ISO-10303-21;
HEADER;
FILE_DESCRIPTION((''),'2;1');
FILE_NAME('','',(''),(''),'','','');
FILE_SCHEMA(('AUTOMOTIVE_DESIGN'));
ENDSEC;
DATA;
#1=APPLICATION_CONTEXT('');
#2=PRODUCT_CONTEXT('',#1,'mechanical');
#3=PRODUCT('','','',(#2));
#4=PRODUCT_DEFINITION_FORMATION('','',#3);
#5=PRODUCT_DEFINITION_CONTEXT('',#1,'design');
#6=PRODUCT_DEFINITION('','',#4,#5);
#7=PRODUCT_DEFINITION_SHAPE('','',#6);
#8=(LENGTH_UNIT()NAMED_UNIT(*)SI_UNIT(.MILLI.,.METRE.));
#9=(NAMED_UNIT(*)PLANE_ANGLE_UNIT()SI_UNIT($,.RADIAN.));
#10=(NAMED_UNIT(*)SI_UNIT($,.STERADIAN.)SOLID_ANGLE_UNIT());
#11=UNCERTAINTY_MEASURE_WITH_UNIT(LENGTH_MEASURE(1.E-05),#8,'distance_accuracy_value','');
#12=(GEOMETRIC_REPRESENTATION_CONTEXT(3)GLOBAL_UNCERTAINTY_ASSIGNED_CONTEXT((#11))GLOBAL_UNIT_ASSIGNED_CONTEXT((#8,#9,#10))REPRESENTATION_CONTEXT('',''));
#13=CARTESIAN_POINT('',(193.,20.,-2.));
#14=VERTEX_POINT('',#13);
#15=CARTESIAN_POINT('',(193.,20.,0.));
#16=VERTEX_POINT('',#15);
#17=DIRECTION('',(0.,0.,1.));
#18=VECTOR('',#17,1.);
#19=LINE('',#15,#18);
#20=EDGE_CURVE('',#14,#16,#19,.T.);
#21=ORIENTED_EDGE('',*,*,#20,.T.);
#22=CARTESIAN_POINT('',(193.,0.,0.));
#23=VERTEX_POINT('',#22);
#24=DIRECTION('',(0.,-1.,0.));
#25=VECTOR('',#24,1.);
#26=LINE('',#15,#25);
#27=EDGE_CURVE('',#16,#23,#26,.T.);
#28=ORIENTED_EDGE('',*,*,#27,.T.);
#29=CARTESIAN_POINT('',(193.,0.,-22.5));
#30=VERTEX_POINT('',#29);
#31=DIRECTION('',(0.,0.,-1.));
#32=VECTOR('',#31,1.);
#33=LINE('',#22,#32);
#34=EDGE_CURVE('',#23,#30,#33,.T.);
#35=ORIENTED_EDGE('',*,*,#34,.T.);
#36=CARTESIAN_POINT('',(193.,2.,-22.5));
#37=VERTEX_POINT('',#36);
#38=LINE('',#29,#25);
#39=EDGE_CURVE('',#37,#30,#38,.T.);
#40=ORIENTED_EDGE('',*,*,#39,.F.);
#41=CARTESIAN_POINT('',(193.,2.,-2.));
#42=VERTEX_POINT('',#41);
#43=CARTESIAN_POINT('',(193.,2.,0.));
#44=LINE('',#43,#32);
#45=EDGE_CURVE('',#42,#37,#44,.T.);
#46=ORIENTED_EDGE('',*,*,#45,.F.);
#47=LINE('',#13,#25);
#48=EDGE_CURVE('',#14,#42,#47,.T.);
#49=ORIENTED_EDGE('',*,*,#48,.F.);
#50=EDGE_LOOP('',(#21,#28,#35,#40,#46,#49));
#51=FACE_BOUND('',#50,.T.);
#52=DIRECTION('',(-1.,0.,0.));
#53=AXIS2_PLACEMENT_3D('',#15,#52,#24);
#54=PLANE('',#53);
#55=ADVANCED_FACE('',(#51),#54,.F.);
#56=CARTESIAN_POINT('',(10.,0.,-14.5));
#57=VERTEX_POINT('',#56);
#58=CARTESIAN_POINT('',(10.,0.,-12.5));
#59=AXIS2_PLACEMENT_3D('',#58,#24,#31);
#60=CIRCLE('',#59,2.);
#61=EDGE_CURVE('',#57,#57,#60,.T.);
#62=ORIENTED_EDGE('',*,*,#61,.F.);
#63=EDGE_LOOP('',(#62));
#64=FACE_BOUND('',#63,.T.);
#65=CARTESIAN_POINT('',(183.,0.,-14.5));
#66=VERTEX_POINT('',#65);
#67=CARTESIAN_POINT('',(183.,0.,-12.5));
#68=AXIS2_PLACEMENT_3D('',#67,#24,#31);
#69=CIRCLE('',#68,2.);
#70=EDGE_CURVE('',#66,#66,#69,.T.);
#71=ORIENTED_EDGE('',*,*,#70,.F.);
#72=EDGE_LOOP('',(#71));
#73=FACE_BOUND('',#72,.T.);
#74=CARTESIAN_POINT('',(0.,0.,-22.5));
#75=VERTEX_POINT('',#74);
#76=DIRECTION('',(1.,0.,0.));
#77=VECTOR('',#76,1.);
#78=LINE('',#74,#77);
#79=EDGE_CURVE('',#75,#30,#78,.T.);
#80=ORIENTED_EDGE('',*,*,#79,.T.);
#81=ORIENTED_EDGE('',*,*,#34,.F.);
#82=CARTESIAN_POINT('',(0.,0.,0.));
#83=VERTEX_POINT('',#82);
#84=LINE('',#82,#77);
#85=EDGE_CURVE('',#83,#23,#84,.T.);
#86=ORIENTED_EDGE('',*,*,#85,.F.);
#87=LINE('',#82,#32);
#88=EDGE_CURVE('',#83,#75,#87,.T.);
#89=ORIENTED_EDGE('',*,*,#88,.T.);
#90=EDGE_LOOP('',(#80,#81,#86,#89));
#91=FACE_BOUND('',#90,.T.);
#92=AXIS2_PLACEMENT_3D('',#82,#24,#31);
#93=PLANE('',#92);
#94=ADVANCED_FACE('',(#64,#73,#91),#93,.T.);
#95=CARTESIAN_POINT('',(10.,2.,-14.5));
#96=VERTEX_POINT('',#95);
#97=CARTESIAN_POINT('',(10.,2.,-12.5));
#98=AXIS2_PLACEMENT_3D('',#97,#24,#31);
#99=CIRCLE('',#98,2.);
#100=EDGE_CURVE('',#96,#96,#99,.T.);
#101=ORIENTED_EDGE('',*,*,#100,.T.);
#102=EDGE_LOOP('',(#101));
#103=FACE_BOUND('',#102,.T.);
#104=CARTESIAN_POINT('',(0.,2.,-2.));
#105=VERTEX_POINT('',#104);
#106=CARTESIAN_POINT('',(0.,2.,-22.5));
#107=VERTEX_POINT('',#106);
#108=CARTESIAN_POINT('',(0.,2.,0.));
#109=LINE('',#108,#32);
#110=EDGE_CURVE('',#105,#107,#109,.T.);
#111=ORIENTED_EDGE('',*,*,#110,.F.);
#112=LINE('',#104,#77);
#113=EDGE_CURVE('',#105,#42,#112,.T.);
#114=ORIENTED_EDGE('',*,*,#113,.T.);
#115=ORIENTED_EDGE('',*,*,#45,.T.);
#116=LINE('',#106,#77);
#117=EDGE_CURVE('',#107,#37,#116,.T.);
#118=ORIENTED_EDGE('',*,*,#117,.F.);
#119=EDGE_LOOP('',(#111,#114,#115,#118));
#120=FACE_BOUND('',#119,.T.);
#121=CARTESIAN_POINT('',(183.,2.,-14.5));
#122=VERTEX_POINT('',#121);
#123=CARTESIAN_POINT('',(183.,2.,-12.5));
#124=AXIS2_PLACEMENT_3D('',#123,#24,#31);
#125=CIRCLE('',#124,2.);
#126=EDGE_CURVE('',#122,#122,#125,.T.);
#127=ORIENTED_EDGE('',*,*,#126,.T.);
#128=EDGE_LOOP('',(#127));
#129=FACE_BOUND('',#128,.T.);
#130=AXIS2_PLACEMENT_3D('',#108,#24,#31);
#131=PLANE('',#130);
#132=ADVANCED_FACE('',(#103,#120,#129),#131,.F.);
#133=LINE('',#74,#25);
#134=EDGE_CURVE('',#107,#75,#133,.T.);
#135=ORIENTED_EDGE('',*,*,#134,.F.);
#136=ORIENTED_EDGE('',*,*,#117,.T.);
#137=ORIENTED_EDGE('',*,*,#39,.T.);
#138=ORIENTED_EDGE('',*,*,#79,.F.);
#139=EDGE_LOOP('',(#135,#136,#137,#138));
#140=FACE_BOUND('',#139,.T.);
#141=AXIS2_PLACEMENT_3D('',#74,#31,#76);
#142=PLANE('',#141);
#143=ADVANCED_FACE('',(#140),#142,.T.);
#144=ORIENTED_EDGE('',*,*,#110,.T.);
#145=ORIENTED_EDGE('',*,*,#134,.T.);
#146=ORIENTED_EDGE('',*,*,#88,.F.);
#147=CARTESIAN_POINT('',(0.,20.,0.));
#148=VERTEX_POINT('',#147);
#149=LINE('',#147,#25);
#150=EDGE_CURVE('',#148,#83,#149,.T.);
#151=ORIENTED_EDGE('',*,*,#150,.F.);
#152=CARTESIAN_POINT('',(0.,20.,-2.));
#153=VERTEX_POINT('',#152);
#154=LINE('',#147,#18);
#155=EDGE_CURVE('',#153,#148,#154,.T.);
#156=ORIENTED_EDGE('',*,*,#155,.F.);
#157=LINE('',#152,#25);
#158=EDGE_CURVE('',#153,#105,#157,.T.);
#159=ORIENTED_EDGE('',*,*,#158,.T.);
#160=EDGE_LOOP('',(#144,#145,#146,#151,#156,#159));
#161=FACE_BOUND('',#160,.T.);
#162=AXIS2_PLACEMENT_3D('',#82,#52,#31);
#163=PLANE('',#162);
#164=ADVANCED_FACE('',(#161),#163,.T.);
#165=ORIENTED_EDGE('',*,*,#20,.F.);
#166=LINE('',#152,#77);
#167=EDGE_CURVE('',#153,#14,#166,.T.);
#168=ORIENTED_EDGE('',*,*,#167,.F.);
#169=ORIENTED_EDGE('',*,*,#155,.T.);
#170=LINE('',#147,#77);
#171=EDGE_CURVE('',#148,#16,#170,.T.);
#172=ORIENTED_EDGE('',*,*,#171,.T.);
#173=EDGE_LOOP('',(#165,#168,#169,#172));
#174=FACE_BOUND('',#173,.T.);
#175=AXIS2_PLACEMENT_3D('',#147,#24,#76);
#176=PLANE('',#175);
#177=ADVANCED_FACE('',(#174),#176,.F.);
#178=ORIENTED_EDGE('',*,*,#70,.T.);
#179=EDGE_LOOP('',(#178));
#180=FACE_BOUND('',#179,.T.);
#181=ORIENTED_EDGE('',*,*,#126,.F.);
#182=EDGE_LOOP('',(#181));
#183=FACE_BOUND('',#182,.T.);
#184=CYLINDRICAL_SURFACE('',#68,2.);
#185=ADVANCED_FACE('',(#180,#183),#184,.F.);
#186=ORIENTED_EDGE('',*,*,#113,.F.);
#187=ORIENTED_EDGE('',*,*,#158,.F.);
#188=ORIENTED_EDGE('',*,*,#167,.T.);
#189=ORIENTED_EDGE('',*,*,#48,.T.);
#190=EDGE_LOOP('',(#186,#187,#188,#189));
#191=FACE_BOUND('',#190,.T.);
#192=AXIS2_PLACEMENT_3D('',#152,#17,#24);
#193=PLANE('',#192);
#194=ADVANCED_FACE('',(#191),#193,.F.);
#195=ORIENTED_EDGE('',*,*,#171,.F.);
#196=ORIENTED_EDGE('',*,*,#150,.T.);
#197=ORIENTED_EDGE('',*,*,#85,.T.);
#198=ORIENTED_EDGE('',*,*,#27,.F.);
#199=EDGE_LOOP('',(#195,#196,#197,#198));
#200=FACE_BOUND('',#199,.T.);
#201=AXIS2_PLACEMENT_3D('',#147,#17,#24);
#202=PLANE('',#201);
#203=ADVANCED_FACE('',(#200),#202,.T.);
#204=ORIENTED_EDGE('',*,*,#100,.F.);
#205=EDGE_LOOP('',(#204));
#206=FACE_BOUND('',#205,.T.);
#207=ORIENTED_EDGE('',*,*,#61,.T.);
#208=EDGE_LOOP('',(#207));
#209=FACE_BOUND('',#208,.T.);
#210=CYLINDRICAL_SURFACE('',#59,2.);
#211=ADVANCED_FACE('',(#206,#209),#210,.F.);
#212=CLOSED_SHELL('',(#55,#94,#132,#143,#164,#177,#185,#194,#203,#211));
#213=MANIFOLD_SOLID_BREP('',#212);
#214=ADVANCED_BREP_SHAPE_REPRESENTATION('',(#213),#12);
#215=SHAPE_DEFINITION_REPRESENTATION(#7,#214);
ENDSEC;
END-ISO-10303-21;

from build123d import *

# Parameters (mm, degrees)
THICKEN1_OUTLINE_W   = 193
THICKEN1_OUTLINE_H   = 22.5
THICKEN1_OUTLINE_R   = 2
THICKEN1_DEPTH       = 2
THICKEN1_START       = 2
THICKEN1_2_OUTLINE_W = 193
THICKEN1_2_OUTLINE_H = 2
THICKEN1_2_DEPTH     = 18


# Read off the part's stored shape, not the designer's step: Thicken1
with BuildPart() as part:
    # Thicken1 outline → Thicken1 (new body)
    with BuildSketch(Plane(origin=(0, 0, 0), x_dir=(1, 0, 0), z_dir=(0, 1, 0))):
        with Locations((96.5, 11.25)):
            Rectangle(THICKEN1_OUTLINE_W, THICKEN1_OUTLINE_H)
        with Locations((10, 12.5)):
            Circle(THICKEN1_OUTLINE_R, mode=Mode.SUBTRACT)
        with Locations((183, 12.5)):
            Circle(THICKEN1_OUTLINE_R, mode=Mode.SUBTRACT)
    extrude(amount=THICKEN1_DEPTH)

    # Thicken1 2 outline → Thicken1 2 (add)
    with BuildSketch(Plane(origin=(0, 0, 0), x_dir=(1, 0, 0), z_dir=(0, 1, 0)).offset(THICKEN1_START)):
        with Locations((96.5, 1)):
            Rectangle(THICKEN1_2_OUTLINE_W, THICKEN1_2_OUTLINE_H)
    extrude(amount=THICKEN1_2_DEPTH)


solid = part.part
